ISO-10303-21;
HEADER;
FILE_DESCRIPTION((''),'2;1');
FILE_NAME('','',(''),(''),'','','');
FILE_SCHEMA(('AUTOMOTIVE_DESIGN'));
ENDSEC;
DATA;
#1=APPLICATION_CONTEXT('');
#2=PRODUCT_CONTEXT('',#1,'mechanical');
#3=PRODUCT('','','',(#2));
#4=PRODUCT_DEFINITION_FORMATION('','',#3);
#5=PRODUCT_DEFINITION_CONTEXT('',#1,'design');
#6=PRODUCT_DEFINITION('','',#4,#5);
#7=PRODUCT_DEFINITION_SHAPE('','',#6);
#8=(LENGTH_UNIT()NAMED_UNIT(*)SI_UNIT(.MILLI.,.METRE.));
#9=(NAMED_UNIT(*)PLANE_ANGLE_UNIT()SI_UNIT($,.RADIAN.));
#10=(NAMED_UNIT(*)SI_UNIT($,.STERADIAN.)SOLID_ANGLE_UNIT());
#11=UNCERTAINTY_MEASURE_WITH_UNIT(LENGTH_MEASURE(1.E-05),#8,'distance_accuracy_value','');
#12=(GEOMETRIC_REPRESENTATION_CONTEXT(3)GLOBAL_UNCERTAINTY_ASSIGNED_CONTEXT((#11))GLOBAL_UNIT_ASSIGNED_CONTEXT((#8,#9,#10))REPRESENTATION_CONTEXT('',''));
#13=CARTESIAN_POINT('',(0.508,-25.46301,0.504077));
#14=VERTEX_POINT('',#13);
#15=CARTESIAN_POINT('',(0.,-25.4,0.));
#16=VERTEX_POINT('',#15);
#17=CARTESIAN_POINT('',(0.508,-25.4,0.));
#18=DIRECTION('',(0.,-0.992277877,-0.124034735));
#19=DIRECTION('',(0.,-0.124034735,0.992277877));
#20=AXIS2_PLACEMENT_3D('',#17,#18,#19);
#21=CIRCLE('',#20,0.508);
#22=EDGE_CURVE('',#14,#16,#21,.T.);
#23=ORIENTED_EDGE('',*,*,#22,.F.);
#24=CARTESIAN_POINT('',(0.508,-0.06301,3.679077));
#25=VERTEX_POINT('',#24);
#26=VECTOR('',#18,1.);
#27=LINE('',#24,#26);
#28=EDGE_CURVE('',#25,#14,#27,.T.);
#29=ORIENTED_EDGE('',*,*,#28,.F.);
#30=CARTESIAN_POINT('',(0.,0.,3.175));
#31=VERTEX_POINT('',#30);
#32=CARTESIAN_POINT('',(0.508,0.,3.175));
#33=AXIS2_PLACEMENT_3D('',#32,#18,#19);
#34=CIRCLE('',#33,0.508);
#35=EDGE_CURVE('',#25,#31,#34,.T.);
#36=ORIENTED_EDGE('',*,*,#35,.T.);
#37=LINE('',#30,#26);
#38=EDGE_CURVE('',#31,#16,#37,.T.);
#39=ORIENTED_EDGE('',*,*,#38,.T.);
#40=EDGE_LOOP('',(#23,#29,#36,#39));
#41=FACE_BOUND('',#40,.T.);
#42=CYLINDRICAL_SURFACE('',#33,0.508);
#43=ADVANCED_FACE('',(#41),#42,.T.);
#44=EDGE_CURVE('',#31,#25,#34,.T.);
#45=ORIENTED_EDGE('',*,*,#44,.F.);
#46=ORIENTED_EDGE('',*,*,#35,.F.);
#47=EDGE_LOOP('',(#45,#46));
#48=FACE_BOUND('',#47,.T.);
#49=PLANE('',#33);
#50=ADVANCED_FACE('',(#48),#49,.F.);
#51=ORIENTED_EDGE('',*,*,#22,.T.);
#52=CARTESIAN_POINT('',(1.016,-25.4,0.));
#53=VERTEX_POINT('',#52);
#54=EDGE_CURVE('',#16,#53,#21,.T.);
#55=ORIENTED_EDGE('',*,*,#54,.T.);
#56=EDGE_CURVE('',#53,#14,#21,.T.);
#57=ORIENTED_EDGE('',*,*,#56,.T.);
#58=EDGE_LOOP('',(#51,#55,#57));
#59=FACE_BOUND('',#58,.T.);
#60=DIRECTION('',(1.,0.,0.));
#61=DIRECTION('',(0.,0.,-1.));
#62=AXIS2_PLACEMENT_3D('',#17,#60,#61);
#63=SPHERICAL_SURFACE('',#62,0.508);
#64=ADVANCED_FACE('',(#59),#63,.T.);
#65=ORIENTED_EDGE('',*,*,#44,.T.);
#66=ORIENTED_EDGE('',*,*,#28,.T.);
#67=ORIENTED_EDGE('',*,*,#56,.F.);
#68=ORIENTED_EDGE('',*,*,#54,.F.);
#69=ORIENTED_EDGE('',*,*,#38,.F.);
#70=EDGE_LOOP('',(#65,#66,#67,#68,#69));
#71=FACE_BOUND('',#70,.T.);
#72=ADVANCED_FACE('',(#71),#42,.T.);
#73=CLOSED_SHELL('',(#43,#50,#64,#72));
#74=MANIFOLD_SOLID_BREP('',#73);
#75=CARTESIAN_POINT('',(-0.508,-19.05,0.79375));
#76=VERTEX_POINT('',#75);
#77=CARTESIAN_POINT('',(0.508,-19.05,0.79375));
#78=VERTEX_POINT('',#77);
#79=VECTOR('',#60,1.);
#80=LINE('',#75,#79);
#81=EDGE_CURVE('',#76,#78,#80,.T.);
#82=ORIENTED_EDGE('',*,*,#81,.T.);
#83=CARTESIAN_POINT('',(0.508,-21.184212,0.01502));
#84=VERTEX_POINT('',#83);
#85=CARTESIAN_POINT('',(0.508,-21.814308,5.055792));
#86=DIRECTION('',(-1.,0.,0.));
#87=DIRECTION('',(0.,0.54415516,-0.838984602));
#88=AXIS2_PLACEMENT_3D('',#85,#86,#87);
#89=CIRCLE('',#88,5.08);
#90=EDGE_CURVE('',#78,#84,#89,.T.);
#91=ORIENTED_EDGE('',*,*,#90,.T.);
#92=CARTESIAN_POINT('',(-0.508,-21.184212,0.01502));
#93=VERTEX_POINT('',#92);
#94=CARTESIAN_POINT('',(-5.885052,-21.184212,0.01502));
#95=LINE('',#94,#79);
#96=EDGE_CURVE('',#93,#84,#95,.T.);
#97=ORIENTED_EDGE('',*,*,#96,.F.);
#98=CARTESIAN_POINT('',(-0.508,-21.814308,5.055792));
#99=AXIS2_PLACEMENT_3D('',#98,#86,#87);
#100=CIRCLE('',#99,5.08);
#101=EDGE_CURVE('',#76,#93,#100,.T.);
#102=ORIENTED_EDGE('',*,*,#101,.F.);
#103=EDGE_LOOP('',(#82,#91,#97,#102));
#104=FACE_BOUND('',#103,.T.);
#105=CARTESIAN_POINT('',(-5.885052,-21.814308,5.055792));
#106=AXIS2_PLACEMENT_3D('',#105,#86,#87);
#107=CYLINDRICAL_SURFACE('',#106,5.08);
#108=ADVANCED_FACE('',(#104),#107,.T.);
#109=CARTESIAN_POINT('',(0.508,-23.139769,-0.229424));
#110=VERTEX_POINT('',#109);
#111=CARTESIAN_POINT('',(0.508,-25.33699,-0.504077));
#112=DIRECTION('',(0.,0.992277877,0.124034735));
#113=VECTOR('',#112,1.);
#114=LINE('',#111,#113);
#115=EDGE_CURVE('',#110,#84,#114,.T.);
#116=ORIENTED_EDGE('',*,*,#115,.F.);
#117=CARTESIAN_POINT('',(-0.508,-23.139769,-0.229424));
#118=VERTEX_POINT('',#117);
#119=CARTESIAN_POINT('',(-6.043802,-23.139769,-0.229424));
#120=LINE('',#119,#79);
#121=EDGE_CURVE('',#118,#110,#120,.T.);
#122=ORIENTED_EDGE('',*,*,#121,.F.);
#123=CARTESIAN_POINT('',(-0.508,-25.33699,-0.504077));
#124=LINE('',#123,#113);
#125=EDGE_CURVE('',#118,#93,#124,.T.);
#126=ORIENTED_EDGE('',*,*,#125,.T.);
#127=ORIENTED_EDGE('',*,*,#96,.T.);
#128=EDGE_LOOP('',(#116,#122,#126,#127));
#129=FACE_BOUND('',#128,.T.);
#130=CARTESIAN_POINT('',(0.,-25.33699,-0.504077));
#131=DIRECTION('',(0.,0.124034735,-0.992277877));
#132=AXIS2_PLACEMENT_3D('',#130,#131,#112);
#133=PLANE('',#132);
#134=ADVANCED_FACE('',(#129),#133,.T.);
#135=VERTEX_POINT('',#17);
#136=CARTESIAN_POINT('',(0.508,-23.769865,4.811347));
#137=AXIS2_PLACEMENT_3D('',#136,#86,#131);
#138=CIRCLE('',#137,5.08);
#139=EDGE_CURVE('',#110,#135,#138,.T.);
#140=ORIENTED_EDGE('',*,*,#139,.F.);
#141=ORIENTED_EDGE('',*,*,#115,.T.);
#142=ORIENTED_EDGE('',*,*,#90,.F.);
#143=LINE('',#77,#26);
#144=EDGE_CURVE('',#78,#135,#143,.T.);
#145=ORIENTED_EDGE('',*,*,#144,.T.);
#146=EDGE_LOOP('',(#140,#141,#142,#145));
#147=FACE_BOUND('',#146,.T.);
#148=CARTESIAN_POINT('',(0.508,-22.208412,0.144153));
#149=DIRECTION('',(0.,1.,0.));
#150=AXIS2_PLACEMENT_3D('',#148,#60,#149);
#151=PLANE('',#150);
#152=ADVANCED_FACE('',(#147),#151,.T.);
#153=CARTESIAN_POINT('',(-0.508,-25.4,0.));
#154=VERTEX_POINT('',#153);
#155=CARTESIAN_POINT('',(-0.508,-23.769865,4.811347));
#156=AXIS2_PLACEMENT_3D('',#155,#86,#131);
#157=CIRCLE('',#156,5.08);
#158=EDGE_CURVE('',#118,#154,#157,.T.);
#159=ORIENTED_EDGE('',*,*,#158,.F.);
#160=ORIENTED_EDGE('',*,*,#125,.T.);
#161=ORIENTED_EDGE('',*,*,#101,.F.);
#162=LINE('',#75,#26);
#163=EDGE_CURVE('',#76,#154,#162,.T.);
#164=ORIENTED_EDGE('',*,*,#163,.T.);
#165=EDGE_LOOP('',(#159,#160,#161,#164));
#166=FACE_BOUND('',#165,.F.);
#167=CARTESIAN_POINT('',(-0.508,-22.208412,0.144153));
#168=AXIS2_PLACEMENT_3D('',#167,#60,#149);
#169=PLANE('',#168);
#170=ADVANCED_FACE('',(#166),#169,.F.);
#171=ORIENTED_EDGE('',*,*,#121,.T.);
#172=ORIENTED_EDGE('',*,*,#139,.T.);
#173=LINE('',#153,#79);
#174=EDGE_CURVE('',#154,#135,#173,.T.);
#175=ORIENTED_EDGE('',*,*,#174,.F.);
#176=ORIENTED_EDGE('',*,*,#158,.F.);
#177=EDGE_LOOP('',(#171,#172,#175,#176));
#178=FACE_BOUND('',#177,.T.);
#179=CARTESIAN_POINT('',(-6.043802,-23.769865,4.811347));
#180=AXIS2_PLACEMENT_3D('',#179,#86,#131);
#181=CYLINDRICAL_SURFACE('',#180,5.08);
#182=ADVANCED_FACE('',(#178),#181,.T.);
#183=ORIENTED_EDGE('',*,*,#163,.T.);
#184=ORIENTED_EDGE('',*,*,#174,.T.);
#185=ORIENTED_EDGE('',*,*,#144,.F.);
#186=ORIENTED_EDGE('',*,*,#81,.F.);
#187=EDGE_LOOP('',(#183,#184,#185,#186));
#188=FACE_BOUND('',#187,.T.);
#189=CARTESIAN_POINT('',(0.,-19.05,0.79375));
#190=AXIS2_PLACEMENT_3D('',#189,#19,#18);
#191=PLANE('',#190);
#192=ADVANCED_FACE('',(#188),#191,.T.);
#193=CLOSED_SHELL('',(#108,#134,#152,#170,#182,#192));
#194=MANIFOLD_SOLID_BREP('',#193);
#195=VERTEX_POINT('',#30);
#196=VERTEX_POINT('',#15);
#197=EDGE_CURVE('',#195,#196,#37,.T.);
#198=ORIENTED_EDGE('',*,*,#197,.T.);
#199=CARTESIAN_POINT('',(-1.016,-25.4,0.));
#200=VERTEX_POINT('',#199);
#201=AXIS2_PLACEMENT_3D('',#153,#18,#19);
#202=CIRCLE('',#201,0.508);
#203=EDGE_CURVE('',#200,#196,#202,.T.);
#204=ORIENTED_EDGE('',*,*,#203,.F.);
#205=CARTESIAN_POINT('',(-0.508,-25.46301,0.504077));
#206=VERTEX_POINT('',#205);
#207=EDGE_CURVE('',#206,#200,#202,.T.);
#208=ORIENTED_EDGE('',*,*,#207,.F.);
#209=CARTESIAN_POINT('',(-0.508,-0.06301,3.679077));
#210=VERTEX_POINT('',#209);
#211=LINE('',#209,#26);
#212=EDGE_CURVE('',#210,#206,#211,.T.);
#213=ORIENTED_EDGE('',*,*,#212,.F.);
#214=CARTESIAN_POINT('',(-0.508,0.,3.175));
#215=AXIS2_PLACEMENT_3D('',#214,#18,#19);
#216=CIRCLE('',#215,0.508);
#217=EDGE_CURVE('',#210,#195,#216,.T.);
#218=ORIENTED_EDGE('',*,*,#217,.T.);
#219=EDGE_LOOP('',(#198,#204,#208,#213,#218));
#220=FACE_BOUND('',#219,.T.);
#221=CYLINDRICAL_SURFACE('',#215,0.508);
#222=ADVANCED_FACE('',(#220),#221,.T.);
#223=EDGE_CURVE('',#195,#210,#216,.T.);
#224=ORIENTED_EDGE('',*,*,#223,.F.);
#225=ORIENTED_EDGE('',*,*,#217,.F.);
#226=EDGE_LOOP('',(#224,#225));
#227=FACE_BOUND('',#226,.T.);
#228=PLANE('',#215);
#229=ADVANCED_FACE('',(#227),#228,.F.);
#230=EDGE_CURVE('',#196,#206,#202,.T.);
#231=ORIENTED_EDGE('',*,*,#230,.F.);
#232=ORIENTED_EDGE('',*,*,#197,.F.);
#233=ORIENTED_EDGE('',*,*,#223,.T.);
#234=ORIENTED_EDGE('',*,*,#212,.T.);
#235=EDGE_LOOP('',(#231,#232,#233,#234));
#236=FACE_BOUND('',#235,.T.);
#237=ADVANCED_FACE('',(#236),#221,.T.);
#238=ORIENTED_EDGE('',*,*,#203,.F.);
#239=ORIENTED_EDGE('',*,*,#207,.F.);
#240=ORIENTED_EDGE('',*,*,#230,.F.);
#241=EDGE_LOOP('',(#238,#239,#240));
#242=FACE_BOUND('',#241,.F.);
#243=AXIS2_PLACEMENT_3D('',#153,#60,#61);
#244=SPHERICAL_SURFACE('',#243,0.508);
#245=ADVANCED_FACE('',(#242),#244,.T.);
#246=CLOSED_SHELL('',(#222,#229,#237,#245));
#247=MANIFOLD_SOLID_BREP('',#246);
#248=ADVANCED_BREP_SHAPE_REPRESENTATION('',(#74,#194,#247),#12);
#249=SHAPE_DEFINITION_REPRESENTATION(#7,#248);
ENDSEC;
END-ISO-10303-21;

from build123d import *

# Parameters (mm, degrees)
F14_DEPTH      = 0.508
F14_DEPTH_BACK = 0.508
F15_T1_DEPTH   = 12.0876033166
F16_T1_DEPTH   = 11.7701033166


# Not quite as in the source:
# - a fillet or chamfer that OpenCascade refuses, or shapes differently, is made with other operations: its cross-section is extruded or revolved along the edge and cut away or added


with BuildPart() as f7:
    # F5 (on offset) → F7 (revolve)
    with BuildSketch(Plane.YZ.offset(0.508)):
        Polygon((-25.4, 0), (0, 3.175), (-0.0630096452, 3.6790771614), (-25.4630096452, 0.5040771614), align=None)
    revolve(axis=Axis((0.508, -12.7, 1.5875), (0, -0.9922778767, -0.1240347346)))



with BuildPart() as f8:
    # F6 (on offset) → F8 (revolve)
    with BuildSketch(Plane.YZ.offset(-0.508)):
        Polygon((-25.4, 0), (0, 3.175), (-0.0630096452, 3.6790771614), (-25.4630096452, 0.5040771614), align=None)
    revolve(axis=Axis((-0.508, -12.7, 1.5875), (0, -0.9922778767, -0.1240347346)))

    # F9 (on offset) → F11 (revolve)
    with BuildSketch(Plane.XZ.offset(25.4)):
        with BuildLine():
            ThreePointArc((-1.016, 0), (-0.508, -0.508), (0, 0))
            Line((0, 0), (-1.016, 0))
        make_face()
    revolve(axis=Axis((-0.508, -25.4, 0), (-1, 0, 0)))


with BuildPart() as f7_1:
    add(f7.part)

    add(f8.part)  # F12 merges F8
    # F10 (on offset) → F12 (revolve)
    with BuildSketch(Plane.XZ.offset(25.4)):
        with BuildLine():
            ThreePointArc((0, 0), (0.508, -0.508), (1.016, 0))
            Line((1.016, 0), (0, 0))
        make_face()
    revolve(axis=Axis((0.508, -25.4, 0), (1, 0, 0)))


with BuildPart() as f14:
    # F13 (on Right) → F14 (new body, two sides)
    with BuildSketch(Plane.YZ) as f14_sk:
        Polygon((-19.05, 0.281796633), (-19.05, 0.79375), (-25.4, 0), (-25.3369903548, -0.5040771614), align=None)
    extrude(amount=F14_DEPTH)
    extrude(f14_sk.sketch, amount=-F14_DEPTH_BACK)

    # F15: fillet of radius 5.08 on 1 edges, made by hand

    # F15_s2 → F15_t1 (cut)
    with BuildSketch(Plane.YZ.offset(-6.0438016583)):
        with BuildLine():
            ThreePointArc((-23.1397689487, -0.2294244856), (-24.2828741459, -0.2426831475), (-25.4, 0))
            Line((-25.4, 0), (-25.3369903548, -0.5040771614))
            Line((-25.3369903548, -0.5040771614), (-23.1397689487, -0.2294244856))
        make_face()
    extrude(amount=F15_T1_DEPTH, mode=Mode.SUBTRACT)

    # F16: fillet of radius 5.08 on 1 edges, made by hand

    # F16_s2 → F16_t1 (cut)
    with BuildSketch(Plane.YZ.offset(-5.8850516583)):
        with BuildLine():
            ThreePointArc((-19.05, 0.79375), (-20.0730153607, 0.2835492006), (-21.184211761, 0.0150201629))
            Line((-21.184211761, 0.0150201629), (-19.05, 0.281796633))
            Line((-19.05, 0.281796633), (-19.05, 0.79375))
        make_face()
    extrude(amount=F16_T1_DEPTH, mode=Mode.SUBTRACT)


solid = Compound([f7_1.part, f14.part])
